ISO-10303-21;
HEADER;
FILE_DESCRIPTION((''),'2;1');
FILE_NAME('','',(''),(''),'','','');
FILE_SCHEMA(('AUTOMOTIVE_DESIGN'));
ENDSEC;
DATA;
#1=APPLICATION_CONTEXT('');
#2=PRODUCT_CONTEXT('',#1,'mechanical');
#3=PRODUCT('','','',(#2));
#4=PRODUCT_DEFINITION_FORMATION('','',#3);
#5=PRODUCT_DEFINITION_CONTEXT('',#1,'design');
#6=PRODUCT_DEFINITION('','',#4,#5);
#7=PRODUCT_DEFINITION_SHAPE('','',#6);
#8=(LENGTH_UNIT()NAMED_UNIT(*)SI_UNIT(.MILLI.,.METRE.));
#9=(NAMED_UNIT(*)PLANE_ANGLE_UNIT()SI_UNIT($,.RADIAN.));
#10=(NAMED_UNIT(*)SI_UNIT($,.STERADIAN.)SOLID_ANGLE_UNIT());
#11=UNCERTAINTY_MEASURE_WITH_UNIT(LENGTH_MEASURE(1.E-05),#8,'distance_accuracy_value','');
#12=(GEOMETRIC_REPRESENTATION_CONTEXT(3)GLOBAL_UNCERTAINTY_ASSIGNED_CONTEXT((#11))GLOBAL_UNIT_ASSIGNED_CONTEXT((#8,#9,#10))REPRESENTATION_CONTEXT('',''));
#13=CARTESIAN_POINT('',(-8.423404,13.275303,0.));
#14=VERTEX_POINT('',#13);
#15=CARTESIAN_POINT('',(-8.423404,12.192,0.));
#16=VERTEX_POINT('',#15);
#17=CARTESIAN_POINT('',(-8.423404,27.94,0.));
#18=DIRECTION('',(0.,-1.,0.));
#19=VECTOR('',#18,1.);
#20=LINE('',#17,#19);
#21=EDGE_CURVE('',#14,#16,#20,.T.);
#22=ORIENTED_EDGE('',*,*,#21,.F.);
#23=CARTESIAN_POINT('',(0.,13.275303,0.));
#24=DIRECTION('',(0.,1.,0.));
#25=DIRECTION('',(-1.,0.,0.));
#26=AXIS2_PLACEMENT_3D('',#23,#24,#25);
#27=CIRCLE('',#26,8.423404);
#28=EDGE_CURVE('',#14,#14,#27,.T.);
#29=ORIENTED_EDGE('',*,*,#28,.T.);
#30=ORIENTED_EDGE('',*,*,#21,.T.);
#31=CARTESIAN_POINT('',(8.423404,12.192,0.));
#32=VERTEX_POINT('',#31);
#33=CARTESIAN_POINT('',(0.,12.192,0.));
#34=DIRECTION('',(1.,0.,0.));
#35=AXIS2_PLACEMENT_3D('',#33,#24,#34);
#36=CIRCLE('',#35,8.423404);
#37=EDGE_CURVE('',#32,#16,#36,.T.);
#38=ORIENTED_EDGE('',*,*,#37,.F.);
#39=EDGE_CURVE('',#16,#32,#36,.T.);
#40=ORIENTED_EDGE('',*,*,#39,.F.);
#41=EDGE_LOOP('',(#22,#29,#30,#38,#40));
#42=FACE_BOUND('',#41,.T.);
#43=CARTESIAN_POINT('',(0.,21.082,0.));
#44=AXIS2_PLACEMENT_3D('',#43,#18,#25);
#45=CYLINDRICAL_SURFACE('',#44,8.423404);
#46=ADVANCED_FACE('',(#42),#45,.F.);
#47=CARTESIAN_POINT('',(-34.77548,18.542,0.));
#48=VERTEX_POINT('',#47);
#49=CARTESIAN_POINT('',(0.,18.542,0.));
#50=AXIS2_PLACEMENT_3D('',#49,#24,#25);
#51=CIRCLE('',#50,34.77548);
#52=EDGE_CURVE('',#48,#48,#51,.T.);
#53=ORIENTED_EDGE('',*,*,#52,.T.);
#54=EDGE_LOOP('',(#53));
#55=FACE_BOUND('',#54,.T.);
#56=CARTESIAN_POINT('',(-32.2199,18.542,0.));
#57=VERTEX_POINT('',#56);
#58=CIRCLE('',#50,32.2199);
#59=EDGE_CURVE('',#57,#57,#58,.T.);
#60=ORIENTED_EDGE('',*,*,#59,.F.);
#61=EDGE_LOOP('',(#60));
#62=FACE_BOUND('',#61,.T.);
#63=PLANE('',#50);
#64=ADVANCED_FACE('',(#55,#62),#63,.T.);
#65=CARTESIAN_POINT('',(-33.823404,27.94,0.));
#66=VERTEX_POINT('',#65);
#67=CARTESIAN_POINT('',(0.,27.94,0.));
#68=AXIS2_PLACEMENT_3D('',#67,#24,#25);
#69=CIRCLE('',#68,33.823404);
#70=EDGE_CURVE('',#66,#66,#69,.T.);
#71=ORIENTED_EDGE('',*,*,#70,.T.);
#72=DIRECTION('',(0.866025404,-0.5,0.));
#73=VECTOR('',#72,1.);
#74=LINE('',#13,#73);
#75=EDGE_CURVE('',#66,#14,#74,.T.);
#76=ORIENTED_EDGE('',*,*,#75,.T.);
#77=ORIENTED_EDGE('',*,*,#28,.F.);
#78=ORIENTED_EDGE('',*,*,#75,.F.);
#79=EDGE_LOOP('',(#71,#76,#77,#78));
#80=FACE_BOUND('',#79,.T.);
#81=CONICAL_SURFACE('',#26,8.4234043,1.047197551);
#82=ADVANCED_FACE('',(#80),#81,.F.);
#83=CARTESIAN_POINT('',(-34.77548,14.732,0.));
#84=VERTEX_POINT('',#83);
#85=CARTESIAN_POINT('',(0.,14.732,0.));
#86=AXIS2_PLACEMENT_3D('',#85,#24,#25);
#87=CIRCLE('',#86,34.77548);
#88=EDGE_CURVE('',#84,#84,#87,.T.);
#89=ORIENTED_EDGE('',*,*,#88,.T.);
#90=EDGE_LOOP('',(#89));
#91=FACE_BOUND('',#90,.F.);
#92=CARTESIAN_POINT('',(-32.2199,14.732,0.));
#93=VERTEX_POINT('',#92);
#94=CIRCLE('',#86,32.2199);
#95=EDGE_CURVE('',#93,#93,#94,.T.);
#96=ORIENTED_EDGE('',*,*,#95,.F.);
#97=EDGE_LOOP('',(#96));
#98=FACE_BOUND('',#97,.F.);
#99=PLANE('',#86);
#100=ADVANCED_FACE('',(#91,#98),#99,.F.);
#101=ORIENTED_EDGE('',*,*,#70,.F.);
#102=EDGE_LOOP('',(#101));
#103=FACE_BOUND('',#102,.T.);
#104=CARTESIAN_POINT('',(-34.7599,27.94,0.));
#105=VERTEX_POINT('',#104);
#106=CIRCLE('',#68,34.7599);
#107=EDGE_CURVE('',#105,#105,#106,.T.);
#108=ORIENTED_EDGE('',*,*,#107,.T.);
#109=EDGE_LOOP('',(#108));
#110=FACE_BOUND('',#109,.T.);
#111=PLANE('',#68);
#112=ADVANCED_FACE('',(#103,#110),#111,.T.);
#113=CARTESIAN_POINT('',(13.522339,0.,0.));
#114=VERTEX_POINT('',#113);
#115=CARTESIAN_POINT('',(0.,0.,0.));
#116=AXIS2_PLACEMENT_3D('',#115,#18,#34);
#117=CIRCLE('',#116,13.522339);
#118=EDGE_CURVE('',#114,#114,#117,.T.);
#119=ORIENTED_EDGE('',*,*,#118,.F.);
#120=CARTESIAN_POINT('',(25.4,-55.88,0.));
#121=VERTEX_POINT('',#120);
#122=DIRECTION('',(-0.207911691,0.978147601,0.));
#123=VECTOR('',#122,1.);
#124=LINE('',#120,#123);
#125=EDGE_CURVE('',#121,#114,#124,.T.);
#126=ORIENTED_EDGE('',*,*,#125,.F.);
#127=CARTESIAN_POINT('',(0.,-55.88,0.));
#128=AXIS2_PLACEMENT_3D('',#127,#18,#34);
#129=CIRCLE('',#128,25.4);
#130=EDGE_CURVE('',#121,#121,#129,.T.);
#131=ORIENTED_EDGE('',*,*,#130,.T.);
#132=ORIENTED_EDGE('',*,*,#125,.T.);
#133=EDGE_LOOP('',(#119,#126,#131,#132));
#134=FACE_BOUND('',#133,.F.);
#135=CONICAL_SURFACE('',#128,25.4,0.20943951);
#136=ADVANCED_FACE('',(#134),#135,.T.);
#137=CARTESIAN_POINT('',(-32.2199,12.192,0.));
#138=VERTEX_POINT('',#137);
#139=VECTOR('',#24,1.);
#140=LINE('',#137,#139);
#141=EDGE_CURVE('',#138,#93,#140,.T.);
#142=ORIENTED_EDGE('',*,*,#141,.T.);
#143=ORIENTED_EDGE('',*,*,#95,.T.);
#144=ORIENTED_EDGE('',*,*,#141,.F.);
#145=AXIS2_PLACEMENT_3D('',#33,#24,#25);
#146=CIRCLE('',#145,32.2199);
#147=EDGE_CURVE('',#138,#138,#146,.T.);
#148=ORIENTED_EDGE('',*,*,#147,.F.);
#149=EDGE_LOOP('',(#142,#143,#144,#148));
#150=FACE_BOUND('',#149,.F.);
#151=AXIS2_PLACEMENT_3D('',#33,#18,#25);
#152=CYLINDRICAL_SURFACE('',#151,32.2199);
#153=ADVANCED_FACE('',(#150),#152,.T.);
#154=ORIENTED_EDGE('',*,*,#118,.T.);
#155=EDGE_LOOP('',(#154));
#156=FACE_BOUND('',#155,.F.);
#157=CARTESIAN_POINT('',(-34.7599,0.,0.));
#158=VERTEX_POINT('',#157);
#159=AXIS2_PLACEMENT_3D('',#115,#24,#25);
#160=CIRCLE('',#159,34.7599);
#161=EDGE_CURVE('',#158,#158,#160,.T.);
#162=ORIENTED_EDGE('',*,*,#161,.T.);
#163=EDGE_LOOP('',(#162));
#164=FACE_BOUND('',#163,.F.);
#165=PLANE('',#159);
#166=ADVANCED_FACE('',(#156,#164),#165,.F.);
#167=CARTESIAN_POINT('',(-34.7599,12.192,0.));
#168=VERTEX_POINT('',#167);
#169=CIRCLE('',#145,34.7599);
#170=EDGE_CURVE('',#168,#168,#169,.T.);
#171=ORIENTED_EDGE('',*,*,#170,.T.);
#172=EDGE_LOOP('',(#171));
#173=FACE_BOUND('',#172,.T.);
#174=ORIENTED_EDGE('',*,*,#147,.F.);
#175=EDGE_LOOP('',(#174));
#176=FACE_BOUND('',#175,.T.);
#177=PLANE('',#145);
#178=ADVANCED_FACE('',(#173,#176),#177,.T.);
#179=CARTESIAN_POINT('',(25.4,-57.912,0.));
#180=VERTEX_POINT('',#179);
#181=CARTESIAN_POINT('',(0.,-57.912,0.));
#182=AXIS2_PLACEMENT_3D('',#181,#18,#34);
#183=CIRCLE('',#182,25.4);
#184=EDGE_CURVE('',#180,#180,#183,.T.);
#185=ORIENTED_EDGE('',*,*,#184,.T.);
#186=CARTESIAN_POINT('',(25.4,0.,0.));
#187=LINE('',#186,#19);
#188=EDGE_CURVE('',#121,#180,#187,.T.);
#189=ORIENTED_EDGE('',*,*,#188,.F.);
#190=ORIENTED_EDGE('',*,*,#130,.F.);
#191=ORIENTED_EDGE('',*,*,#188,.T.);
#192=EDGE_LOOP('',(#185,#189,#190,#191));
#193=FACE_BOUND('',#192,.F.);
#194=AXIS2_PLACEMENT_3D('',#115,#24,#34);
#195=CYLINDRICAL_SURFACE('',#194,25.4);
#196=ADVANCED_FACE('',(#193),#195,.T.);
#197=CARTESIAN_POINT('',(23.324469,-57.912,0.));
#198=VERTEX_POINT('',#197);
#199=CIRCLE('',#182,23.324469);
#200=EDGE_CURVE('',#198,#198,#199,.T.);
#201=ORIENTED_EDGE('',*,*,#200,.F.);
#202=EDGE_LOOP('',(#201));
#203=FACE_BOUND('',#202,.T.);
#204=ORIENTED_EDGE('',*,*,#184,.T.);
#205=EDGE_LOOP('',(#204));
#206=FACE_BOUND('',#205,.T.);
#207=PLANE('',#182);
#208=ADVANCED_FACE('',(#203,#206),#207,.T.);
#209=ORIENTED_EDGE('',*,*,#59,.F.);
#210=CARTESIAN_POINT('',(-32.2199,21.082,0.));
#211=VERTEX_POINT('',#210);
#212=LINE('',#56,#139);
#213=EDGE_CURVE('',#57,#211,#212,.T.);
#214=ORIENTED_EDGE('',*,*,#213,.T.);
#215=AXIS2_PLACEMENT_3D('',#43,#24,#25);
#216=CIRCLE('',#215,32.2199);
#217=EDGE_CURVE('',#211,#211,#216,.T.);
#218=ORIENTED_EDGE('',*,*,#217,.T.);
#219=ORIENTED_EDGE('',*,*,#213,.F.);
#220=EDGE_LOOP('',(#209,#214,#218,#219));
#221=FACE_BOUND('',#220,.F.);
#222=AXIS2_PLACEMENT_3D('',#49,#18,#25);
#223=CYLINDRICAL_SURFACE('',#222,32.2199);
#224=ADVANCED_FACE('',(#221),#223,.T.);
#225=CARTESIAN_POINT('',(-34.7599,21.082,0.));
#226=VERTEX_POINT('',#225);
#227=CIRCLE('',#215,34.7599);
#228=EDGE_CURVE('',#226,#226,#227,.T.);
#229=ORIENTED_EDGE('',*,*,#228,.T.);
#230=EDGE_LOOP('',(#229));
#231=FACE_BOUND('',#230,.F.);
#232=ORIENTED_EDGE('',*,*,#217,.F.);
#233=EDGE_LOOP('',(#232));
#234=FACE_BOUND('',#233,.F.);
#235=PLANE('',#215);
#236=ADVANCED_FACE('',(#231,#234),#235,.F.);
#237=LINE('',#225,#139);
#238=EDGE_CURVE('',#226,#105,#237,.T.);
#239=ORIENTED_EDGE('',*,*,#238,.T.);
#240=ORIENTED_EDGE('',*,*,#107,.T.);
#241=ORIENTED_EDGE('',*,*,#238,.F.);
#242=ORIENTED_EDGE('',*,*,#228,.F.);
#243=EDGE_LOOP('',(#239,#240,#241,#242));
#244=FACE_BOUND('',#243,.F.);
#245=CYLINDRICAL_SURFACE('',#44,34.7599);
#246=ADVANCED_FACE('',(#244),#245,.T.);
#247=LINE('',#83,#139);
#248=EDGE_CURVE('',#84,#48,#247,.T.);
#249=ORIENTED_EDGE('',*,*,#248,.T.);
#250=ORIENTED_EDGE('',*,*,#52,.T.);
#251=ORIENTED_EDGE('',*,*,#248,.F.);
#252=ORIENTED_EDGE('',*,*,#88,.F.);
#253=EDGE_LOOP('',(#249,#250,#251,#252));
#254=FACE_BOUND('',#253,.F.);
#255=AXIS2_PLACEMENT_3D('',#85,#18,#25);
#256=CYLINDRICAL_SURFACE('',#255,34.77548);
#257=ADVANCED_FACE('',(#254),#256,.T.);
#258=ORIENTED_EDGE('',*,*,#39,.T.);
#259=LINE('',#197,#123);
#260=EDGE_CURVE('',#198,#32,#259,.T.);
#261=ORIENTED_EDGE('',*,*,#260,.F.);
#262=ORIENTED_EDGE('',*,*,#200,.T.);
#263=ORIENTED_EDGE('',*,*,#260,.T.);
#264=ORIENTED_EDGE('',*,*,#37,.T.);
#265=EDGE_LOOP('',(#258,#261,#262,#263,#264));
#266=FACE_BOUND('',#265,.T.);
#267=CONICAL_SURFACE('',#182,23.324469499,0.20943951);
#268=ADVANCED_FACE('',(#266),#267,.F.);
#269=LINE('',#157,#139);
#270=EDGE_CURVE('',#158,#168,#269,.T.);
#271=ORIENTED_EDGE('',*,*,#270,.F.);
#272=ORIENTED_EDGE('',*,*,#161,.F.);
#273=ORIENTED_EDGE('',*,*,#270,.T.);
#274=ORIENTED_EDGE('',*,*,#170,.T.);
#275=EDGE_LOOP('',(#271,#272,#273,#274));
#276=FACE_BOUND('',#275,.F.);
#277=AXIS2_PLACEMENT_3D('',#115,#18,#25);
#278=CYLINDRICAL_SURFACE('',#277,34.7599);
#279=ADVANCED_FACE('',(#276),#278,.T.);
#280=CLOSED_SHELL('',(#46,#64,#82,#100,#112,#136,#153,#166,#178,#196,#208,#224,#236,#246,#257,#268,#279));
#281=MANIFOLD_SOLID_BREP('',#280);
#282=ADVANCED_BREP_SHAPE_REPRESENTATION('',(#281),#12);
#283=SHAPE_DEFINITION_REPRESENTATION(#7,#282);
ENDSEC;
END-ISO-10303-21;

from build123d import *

# Parameters (mm, degrees)
F0_R      = 25.4
F0_R_2    = 7.9375
F1_DEPTH  = 57.912
F2_SIZE2  = 11.8776606661
F2_SIZE   = 55.88
F3_R      = 34.7599
F3_R_2    = 13.5223393339
F3_R_3    = 7.9375
F4_DEPTH  = 12.192
F6_R      = 32.2199
F6_R_2    = 8.4234043
F7_DEPTH  = 2.54
F8_R      = 34.7754798106
F8_R_2    = 32.2199
F8_R_3    = 8.4234043
F9_DEPTH  = 3.81
F10_R     = 32.2199
F10_R_2   = 8.4234043
F11_DEPTH = 2.54
F13_R     = 34.7599
F13_R_2   = 32.2199
F12_R     = 32.2199
F12_R_2   = 8.4234043
F14_DEPTH = 6.858
F15_SIZE2 = 14.6646968374
F15_SIZE  = 25.4


# Not quite as in the source:
# - a fillet or chamfer that OpenCascade refuses, or shapes differently, is made with other operations: its cross-section is extruded or revolved along the edge and cut away or added


with BuildPart() as f1:
    # F0 (on Front) → F1 (new body)
    with BuildSketch(Plane.XZ):
        Circle(F0_R)
        Circle(F0_R_2, mode=Mode.SUBTRACT)
    extrude(amount=F1_DEPTH)

    # F2
    f2_edges = [f1.edges().sort_by_distance(p)[0] for p in [
        (-25.4, 0, 0),
    ]]
    f2_side = f1.faces().sort_by_distance((-25.4, -28.956, 0))[0]
    chamfer(f2_edges, length=F2_SIZE, length2=F2_SIZE2, reference=f2_side)

    # F3 (on face) → F4 (join)
    with BuildSketch(Plane(origin=(0, 0, 0), x_dir=(-1, 0, 0), z_dir=(0, 1, 0))):
        Circle(F3_R)
        Circle(F3_R_2, mode=Mode.SUBTRACT)
        Circle(F3_R_2)
        Circle(F3_R_3, mode=Mode.SUBTRACT)
    extrude(amount=F4_DEPTH)

    # F5: chamfer of 72.39 x 15.3869694993 on 1 edges, made by hand

    # F5_s1 → F5_t2 (revolve, cut)
    with BuildSketch(Plane.XY):
        Polygon((23.3244694993, -57.912), (7.9375, 14.478), (7.9375, -57.912), align=None)
    revolve(axis=Axis((0, -57.912, 0), (0, -1, 0)), mode=Mode.SUBTRACT)

    # F6 (on face) → F7 (join)
    with BuildSketch(Plane(origin=(0, 12.192, 0), x_dir=(-1, 0, 0), z_dir=(0, 1, 0))):
        Circle(F6_R)
        Circle(F6_R_2, mode=Mode.SUBTRACT)
    extrude(amount=F7_DEPTH)

    # F8 (on face) → F9 (join)
    with BuildSketch(Plane(origin=(0, 14.732, 0), x_dir=(-1, 0, 0), z_dir=(0, 1, 0))):
        Circle(F8_R)
        Circle(F8_R_2, mode=Mode.SUBTRACT)
        Circle(F8_R_2)
        Circle(F8_R_3, mode=Mode.SUBTRACT)
    extrude(amount=F9_DEPTH)

    # F10 (on face) → F11 (join)
    with BuildSketch(Plane(origin=(0, 18.542, 0), x_dir=(-1, 0, 0), z_dir=(0, 1, 0))):
        Circle(F10_R)
        Circle(F10_R_2, mode=Mode.SUBTRACT)
    extrude(amount=F11_DEPTH)

    # F13 (on face) + F12 (on face) → F14 (join)
    with BuildSketch(Plane(origin=(0, 21.082, 0), x_dir=(-1, 0, 0), z_dir=(0, 1, 0))):
        Circle(F13_R)
        Circle(F13_R_2, mode=Mode.SUBTRACT)
    with BuildSketch(Plane(origin=(0, 21.082, 0), x_dir=(-1, 0, 0), z_dir=(0, 1, 0))):
        Circle(F12_R)
        Circle(F12_R_2, mode=Mode.SUBTRACT)
    extrude(amount=F14_DEPTH)

    # F15
    f15_edges = [f1.edges().sort_by_distance(p)[0] for p in [
        (8.423404, 27.94, 0),
    ]]
    f15_side = f1.faces().sort_by_distance((33.776742, 27.94, 0))[0]
    chamfer(f15_edges, length=F15_SIZE, length2=F15_SIZE2, reference=f15_side)


solid = f1.part
